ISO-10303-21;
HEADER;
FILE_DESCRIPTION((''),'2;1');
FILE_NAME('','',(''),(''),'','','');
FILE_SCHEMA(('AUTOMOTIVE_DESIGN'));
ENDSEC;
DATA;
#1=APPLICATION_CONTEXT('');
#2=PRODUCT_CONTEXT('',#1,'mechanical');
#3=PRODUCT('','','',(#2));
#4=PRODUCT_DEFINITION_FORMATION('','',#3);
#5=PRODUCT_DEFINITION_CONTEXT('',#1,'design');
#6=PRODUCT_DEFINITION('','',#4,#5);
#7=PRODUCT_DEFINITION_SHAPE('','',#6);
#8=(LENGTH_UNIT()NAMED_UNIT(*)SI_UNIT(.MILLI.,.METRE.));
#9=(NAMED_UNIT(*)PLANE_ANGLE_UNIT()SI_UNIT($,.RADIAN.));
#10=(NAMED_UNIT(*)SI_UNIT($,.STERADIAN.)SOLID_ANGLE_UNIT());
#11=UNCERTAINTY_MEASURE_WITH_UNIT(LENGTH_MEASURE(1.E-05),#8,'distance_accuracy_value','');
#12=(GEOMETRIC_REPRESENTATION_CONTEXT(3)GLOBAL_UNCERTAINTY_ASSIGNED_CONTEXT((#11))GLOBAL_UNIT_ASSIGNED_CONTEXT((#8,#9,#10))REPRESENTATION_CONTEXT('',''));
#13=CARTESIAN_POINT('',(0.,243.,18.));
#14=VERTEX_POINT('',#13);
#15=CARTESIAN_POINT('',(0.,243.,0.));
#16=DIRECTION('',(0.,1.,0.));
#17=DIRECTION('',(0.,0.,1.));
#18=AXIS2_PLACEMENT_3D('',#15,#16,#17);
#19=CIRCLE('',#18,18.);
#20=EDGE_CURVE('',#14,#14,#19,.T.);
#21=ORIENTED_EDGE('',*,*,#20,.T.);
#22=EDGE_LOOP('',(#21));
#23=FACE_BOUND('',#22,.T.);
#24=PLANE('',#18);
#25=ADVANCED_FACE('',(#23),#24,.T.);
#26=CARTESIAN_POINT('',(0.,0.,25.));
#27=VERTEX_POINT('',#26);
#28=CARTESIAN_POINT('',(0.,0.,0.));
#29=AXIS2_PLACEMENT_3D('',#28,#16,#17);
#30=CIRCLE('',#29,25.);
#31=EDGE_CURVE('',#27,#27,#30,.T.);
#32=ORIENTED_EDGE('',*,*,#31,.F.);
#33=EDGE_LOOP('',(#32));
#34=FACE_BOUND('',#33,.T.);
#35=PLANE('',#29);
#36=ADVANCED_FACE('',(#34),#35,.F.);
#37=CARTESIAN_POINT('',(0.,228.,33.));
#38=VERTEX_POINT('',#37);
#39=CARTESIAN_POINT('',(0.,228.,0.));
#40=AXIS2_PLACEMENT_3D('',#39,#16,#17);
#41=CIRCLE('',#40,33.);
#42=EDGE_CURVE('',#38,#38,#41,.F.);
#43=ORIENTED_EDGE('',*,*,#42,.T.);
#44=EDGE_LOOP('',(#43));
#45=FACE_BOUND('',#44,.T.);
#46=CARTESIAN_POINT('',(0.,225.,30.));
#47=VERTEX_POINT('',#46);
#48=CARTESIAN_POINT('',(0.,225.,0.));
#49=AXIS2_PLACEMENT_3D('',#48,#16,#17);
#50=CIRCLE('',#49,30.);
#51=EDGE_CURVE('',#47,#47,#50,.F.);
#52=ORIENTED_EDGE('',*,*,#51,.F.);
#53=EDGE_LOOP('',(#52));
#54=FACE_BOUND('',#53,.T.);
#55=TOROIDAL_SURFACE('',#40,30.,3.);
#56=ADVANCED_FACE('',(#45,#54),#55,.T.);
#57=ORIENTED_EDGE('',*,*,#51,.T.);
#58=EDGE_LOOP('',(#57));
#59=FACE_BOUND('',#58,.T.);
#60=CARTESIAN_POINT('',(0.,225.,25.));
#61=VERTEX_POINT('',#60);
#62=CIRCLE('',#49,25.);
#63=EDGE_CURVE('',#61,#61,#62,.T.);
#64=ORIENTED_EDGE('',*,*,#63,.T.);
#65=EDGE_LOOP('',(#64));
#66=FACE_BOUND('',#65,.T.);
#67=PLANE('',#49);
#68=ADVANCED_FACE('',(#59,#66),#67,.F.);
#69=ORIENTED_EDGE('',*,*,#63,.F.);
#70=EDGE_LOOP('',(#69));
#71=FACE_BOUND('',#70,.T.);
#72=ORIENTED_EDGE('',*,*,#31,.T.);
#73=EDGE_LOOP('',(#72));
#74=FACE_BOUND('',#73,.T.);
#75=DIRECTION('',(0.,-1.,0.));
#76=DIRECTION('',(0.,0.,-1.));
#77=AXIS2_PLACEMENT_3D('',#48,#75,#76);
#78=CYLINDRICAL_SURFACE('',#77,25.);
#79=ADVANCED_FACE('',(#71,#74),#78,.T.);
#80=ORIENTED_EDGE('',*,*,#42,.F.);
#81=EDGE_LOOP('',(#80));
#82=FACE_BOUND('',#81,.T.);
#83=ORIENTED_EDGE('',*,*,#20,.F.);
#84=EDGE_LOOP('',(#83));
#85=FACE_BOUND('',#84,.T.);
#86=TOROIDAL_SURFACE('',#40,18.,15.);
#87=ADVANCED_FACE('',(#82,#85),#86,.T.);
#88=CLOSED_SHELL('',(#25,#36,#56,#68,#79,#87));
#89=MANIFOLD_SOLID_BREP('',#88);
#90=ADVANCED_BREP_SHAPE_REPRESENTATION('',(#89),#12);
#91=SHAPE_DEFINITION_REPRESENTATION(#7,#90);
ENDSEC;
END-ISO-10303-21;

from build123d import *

# Parameters (mm, degrees)
SZKIC1_R                    = 25
DODANIE_WYCI_GNI_CIE1_DEPTH = 225
SZKIC2_R                    = 33
DODANIE_WYCI_GNI_CIE2_DEPTH = 18
ZAOKR_GLENIE1_R             = 15
ZAOKR_GLENIE2_R             = 3


with BuildPart() as part:
    # Szkic1 → Dodanie-wyciągnięcie1 (new body)
    with BuildSketch(Plane(origin=(0, 0, 0), x_dir=(1, 0, 0), z_dir=(0, 1, 0))):
        with Locations(Location((0, 0, 0), (0, 0, 270))):
            Circle(SZKIC1_R)
    extrude(amount=DODANIE_WYCI_GNI_CIE1_DEPTH)

    # Szkic2 → Dodanie-wyciągnięcie2 (add)
    with BuildSketch(Plane(origin=(0, 225, 0), x_dir=(1, 0, 0), z_dir=(0, 1, 0))):
        with Locations(Location((0, 0, 0), (0, 0, 270))):
            Circle(SZKIC2_R)
    extrude(amount=DODANIE_WYCI_GNI_CIE2_DEPTH)

    # Zaokrąglenie1
    zaokr_glenie1_edges = [part.edges().sort_by_distance(p)[0] for p in [
        (0, 243, -33),
    ]]
    fillet(zaokr_glenie1_edges, radius=ZAOKR_GLENIE1_R)

    # Zaokrąglenie2
    zaokr_glenie2_edges = [part.edges().sort_by_distance(p)[0] for p in [
        (0, 225, -33),
    ]]
    fillet(zaokr_glenie2_edges, radius=ZAOKR_GLENIE2_R - 0.0001)  # a hair under: the kernel refuses the full size


solid = part.part
